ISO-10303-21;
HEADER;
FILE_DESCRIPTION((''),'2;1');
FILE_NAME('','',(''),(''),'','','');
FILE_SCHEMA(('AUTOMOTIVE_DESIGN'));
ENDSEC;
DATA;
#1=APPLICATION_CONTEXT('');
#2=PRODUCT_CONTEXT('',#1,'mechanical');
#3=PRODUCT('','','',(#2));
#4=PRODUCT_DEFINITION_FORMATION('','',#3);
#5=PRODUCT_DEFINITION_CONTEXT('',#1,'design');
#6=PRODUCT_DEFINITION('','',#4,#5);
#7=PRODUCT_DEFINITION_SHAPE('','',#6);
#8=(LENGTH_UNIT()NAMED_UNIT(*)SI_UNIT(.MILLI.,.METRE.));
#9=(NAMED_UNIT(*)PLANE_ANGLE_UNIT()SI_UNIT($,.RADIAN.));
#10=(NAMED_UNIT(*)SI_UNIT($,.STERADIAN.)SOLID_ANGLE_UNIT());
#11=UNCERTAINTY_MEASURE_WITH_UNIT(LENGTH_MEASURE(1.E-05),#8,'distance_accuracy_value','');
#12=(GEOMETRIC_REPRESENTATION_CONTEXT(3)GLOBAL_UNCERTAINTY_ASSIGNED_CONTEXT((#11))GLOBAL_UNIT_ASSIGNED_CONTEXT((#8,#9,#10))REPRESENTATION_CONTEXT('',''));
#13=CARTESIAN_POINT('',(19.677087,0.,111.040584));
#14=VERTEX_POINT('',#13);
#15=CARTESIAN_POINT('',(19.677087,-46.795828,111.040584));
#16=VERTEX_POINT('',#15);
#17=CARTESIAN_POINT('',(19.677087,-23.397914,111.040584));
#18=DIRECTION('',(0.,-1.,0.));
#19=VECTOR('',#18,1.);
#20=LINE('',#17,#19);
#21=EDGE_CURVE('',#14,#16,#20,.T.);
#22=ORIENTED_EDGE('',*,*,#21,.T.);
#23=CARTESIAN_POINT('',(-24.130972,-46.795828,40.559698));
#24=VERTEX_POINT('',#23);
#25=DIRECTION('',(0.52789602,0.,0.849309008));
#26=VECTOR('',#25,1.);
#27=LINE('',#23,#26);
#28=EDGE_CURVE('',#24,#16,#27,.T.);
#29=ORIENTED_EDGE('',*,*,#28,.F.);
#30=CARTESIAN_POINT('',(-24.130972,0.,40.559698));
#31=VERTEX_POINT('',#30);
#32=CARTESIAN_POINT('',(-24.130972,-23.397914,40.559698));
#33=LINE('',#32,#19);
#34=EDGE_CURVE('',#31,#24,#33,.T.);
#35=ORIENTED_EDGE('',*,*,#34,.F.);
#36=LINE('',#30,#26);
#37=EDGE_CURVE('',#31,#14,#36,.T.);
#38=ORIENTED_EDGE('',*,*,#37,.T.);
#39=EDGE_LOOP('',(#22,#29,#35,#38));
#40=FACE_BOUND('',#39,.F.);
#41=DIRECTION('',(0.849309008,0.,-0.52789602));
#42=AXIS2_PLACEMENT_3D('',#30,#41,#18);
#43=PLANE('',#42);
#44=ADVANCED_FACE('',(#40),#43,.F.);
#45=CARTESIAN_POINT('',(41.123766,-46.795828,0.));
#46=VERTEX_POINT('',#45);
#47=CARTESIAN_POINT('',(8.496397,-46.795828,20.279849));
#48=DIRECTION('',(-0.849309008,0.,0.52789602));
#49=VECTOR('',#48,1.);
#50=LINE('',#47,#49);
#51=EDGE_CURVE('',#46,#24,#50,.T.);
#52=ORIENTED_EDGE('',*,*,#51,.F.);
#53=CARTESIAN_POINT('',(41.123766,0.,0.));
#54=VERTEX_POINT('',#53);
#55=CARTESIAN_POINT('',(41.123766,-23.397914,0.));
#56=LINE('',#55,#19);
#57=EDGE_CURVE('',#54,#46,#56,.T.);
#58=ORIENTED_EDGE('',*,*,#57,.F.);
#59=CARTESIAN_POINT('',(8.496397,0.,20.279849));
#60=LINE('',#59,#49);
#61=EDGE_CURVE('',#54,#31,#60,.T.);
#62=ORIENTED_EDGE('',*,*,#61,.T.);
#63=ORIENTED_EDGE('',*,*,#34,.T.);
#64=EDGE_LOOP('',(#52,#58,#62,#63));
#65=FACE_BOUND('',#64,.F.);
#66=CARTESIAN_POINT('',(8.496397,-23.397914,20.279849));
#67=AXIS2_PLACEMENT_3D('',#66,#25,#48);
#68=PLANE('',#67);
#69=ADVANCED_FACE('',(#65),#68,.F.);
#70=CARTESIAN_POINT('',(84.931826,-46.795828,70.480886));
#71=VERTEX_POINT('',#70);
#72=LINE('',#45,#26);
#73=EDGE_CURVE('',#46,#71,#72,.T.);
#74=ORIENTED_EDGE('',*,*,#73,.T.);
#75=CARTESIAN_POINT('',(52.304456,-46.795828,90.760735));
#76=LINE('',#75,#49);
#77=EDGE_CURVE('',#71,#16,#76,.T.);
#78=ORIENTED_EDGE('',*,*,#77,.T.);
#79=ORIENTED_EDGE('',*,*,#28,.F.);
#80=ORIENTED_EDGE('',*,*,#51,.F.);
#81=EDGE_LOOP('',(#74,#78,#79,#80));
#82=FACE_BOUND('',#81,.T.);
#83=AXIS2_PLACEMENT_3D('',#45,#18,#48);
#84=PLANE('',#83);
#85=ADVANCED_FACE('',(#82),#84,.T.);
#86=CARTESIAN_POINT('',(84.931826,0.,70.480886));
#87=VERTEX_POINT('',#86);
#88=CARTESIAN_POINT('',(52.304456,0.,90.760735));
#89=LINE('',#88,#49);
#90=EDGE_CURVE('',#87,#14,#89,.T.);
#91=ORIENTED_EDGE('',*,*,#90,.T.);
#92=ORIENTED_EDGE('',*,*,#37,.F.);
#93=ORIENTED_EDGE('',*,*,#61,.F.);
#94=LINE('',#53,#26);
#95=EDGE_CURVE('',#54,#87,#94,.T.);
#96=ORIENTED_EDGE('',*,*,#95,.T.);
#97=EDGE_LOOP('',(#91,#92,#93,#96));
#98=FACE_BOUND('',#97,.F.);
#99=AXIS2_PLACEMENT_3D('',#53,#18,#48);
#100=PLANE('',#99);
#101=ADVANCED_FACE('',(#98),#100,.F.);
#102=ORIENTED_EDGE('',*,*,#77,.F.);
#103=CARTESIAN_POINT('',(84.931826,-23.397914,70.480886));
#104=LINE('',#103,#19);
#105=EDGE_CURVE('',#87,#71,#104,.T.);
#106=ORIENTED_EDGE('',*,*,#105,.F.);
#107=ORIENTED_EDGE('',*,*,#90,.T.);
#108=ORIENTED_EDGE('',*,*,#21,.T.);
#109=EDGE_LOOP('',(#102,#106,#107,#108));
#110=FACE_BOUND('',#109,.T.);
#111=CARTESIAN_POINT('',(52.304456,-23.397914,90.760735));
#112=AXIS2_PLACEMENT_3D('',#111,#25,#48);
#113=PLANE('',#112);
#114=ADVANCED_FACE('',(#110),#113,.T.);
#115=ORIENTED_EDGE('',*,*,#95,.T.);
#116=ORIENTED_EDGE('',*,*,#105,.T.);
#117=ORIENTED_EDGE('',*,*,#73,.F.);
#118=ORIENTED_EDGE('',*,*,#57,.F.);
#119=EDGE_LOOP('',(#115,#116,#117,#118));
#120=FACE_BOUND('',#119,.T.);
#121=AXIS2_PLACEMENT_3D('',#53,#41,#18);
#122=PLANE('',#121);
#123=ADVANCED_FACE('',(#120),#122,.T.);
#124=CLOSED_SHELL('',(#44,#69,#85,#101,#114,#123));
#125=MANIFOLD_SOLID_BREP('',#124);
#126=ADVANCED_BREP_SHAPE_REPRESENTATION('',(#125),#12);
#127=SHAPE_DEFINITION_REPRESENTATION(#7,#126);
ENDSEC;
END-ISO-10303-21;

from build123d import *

# Parameters (mm, degrees)
F1_E2_W  = 76.8327403991
F1_E2_H  = 46.7958282679
F2_DEPTH = 82.9861517996


with BuildPart() as f2:
    # F1_E2 (on explicit) → F2 (new body)
    with BuildSketch(Plane(origin=(41.1237664521, 0, 0), x_dir=(-0.8493090083, 0, 0.5278960204), z_dir=(0.5278960204, 0, 0.8493090083))):
        with Locations((38.4163701995, 23.397914134)):
            Rectangle(F1_E2_W, F1_E2_H)
    extrude(amount=F2_DEPTH)


solid = f2.part
